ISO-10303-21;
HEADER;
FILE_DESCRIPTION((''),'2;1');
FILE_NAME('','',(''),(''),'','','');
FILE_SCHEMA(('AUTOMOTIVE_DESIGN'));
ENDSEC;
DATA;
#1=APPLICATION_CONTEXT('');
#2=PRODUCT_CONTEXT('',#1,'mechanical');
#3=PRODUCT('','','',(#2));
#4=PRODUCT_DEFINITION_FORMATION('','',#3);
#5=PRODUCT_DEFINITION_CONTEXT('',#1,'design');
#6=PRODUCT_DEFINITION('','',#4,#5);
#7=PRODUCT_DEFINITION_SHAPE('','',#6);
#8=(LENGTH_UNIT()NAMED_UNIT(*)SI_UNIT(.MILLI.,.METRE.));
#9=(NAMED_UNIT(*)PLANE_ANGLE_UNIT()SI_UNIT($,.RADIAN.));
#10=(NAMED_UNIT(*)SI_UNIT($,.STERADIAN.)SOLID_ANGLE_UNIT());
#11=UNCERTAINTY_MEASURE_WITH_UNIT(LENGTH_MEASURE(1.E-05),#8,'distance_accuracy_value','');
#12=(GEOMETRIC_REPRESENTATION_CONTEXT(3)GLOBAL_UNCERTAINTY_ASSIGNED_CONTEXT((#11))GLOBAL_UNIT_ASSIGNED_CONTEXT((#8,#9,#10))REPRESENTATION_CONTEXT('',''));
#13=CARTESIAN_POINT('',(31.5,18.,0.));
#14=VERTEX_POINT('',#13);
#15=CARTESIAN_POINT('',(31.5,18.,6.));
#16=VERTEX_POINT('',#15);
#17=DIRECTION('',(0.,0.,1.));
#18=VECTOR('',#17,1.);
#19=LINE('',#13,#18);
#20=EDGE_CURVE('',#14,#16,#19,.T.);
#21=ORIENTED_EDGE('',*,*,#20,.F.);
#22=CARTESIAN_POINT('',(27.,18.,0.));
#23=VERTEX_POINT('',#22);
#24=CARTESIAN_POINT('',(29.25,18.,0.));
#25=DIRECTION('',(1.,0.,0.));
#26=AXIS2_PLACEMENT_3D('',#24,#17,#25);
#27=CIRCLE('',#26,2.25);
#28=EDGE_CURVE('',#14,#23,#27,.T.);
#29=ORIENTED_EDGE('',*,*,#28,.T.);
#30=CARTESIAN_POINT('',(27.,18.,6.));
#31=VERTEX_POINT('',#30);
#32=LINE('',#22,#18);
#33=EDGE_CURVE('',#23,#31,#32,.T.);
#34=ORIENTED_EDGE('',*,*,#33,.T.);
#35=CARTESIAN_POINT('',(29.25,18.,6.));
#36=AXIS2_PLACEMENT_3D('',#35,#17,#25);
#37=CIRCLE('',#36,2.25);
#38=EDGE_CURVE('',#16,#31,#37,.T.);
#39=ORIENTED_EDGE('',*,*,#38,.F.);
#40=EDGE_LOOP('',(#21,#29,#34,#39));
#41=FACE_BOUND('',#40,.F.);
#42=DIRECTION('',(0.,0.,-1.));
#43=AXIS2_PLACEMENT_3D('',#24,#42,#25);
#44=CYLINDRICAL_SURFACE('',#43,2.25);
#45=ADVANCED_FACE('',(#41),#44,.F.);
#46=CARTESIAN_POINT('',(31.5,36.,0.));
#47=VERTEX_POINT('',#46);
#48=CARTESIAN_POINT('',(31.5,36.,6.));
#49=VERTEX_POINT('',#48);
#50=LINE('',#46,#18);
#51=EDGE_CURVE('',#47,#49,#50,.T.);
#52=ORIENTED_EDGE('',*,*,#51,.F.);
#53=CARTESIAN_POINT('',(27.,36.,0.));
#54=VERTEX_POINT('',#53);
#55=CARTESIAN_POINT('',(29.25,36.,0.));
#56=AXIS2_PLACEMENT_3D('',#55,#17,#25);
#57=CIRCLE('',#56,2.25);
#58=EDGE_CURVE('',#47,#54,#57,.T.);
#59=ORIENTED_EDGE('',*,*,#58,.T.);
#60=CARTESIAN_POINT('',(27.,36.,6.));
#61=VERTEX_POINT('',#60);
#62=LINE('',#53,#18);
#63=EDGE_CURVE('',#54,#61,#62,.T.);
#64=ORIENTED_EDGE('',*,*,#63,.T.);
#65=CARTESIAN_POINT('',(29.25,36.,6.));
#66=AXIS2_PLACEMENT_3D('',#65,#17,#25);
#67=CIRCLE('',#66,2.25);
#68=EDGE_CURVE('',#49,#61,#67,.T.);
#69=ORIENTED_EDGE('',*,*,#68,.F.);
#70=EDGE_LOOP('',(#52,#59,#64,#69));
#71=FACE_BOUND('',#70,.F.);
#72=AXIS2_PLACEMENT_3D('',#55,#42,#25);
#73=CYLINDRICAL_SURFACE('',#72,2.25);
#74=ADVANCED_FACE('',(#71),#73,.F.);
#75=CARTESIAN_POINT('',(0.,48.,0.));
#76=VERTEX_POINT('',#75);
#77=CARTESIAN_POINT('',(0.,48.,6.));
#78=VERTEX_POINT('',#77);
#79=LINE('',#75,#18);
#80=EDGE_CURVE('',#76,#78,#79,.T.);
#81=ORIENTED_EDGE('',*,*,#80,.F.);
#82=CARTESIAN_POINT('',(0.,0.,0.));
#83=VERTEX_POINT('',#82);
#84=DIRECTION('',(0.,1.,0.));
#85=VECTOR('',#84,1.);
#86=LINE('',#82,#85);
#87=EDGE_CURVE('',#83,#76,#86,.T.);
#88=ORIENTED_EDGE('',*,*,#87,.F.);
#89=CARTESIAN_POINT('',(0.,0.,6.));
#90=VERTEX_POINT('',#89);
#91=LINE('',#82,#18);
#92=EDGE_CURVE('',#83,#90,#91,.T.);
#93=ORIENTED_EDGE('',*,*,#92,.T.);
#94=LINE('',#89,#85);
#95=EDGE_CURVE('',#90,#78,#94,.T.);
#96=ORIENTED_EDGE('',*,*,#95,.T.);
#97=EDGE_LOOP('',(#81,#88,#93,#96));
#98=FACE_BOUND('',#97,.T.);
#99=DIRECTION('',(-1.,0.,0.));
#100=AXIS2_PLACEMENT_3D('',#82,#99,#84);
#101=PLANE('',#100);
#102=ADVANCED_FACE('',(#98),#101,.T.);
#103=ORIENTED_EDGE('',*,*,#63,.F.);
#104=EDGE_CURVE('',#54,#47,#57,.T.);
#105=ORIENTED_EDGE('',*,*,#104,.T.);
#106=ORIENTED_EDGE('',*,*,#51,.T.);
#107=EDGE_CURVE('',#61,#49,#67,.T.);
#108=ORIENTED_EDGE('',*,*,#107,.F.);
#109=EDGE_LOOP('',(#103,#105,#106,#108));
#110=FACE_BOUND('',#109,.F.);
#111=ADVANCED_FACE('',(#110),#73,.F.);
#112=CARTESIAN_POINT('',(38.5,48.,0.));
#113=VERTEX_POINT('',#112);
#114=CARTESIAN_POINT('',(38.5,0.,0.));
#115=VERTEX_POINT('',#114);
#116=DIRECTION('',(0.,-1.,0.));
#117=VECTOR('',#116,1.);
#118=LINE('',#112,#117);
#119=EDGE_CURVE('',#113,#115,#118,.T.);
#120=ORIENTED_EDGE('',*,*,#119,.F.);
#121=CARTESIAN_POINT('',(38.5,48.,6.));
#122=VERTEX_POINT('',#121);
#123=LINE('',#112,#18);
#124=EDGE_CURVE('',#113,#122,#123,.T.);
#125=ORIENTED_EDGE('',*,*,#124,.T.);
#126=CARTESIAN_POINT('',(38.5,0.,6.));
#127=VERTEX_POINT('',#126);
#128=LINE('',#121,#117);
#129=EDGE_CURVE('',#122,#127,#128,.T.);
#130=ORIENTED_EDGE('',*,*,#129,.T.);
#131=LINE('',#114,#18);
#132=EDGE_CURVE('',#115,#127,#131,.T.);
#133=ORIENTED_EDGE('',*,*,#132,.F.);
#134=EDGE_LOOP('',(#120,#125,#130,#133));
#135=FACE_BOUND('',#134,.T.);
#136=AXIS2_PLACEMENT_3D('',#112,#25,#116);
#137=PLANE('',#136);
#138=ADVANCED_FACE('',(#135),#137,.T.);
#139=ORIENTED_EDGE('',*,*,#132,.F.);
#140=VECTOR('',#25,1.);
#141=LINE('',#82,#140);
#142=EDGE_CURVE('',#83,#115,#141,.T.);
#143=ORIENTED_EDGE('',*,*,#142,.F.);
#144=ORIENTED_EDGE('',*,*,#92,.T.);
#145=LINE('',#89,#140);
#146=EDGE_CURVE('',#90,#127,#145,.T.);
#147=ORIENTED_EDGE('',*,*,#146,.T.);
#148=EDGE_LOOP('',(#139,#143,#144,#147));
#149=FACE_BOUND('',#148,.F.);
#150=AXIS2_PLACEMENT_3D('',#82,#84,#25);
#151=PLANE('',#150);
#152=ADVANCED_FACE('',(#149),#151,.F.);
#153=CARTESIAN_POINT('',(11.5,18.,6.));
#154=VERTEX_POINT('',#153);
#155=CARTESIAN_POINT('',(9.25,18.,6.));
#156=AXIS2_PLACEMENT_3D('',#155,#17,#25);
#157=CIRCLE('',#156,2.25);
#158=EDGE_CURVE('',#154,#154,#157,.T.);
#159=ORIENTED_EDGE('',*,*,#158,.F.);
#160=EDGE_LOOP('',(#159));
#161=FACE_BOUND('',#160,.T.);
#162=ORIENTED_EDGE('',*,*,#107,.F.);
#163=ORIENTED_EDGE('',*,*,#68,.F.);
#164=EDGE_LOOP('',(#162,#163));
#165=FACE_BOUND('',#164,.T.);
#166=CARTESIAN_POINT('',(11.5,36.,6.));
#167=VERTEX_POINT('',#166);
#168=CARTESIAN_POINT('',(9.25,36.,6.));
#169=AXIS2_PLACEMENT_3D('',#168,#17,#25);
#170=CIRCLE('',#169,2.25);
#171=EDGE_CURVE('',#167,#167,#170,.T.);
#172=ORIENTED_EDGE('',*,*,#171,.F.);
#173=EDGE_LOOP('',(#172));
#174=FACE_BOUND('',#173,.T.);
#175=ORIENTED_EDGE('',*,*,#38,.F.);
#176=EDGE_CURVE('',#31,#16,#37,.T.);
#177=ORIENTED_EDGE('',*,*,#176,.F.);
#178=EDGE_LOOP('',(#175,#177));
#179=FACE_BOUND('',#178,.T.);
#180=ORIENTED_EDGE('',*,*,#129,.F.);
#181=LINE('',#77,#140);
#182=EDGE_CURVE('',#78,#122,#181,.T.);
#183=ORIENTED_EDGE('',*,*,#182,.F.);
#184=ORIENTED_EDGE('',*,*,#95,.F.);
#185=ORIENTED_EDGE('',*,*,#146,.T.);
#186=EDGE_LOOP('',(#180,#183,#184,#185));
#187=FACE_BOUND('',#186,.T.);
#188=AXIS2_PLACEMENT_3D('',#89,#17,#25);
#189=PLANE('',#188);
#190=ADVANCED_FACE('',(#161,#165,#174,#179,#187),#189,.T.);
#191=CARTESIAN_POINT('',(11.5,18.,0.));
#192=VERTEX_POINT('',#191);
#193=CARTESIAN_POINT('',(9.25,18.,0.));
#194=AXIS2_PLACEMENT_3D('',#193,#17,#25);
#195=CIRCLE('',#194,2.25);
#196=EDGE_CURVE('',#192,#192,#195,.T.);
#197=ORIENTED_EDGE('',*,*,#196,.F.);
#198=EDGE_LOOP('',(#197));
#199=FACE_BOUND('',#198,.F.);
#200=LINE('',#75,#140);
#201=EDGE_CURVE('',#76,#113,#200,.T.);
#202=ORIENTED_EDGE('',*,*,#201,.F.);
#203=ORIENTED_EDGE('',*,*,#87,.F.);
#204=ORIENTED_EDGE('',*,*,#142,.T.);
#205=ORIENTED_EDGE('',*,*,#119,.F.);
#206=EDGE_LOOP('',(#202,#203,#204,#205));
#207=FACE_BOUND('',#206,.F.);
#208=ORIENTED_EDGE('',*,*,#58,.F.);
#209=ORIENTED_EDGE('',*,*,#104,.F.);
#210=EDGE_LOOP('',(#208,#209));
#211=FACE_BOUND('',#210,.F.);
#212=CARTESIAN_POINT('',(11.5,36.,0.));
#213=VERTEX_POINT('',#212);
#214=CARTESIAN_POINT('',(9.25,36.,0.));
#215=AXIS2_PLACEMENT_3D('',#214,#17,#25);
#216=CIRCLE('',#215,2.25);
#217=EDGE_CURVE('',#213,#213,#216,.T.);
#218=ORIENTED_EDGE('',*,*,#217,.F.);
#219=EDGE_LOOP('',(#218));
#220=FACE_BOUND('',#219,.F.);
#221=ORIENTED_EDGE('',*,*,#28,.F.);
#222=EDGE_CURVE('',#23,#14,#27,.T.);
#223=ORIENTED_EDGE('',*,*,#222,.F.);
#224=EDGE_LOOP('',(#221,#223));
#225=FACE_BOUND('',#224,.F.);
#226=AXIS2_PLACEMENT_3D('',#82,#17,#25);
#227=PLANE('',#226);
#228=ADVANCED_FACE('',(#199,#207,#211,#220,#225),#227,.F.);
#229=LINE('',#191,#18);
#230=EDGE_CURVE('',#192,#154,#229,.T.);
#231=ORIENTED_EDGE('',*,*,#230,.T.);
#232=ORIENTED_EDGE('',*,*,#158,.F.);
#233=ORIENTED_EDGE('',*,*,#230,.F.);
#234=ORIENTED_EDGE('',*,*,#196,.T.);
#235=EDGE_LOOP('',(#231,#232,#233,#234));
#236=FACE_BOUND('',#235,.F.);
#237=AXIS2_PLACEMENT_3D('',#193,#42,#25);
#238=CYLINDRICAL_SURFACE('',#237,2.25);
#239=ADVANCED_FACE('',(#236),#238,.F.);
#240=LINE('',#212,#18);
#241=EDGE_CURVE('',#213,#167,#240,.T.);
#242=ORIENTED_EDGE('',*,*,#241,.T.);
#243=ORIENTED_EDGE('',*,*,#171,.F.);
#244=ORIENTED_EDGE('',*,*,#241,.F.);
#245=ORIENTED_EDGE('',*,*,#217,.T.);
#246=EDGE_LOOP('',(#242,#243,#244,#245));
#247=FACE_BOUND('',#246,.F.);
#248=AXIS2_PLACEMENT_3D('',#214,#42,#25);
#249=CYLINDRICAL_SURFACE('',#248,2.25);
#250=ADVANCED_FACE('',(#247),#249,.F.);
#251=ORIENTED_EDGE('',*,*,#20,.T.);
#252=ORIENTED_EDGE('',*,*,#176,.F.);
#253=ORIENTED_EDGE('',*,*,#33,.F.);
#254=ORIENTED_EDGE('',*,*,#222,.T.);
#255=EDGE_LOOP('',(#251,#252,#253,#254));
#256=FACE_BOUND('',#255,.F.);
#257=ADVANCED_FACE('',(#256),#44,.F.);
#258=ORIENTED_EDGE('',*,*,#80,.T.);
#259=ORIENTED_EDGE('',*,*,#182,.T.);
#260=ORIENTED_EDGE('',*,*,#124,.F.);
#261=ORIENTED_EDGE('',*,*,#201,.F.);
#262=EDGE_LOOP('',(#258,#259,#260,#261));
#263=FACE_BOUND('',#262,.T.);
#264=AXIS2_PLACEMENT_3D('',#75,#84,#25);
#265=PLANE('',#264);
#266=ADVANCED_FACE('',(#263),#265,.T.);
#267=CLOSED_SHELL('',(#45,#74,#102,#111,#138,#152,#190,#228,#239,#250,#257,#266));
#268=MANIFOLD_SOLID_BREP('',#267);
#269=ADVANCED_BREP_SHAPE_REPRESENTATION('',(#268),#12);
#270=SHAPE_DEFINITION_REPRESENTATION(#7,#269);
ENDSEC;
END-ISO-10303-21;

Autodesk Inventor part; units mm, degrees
ref_plane "YZ Plane" through (0, 0, 0) normal (1, 0, 0) x (0, 1, 0)
ref_plane "XZ Plane" through (0, 0, 0) normal (0, 1, 0) x (-1, 0, 0)
ref_plane "XY Plane" through (0, 0, 0) normal (0, 0, 1) x (1, 0, 0)
sketch "Sketch1" plane through (0, 0, 0) normal (0, 0, 1) x (1, 0, 0)
  line L0 (0, 0) -> (38.5, 0)
  line L1 (0, 0) -> (0, 48)
  line L2 (0, 48) -> (38.5, 48)
  line L3 (38.5, 48) -> (38.5, 0)
  circle A0 centre (9.25, 18) radius 2.25
  line L4 (9.25, 18) -> (29.25, 18)
  circle A1 centre (29.25, 18) radius 2.25
  circle A2 centre (9.25, 36) radius 2.25
  line L5 (9.25, 36) -> (29.25, 36)
  circle A3 centre (29.25, 36) radius 2.25
  dimension "d0" = 48
  dimension "d3" = 18
  dimension "d4" = 4.5
  dimension "d5" = 4.5
  dimension "d6" = 20
  dimension "d7" = 38.5
  dimension "d8" = 9.25
  dimension "d9" = 4.5
  dimension "d10" = 4.5
  dimension "d11" = 20
  dimension "d12" = 12
  dimension "d13" = 9.25
extrude "Extrusion1" add sketch "Sketch1" along normal blind 6
equation "\"d5\" = d4"
equation "\"d8\" = -0.5 * d6 + 0.5 * d7"
equation "\"d10\" = d9"
equation "\"d13\" = -0.5 * d11 + 0.5 * d7"
properties part number "BaseC_9" material "PMMA Plastic"
